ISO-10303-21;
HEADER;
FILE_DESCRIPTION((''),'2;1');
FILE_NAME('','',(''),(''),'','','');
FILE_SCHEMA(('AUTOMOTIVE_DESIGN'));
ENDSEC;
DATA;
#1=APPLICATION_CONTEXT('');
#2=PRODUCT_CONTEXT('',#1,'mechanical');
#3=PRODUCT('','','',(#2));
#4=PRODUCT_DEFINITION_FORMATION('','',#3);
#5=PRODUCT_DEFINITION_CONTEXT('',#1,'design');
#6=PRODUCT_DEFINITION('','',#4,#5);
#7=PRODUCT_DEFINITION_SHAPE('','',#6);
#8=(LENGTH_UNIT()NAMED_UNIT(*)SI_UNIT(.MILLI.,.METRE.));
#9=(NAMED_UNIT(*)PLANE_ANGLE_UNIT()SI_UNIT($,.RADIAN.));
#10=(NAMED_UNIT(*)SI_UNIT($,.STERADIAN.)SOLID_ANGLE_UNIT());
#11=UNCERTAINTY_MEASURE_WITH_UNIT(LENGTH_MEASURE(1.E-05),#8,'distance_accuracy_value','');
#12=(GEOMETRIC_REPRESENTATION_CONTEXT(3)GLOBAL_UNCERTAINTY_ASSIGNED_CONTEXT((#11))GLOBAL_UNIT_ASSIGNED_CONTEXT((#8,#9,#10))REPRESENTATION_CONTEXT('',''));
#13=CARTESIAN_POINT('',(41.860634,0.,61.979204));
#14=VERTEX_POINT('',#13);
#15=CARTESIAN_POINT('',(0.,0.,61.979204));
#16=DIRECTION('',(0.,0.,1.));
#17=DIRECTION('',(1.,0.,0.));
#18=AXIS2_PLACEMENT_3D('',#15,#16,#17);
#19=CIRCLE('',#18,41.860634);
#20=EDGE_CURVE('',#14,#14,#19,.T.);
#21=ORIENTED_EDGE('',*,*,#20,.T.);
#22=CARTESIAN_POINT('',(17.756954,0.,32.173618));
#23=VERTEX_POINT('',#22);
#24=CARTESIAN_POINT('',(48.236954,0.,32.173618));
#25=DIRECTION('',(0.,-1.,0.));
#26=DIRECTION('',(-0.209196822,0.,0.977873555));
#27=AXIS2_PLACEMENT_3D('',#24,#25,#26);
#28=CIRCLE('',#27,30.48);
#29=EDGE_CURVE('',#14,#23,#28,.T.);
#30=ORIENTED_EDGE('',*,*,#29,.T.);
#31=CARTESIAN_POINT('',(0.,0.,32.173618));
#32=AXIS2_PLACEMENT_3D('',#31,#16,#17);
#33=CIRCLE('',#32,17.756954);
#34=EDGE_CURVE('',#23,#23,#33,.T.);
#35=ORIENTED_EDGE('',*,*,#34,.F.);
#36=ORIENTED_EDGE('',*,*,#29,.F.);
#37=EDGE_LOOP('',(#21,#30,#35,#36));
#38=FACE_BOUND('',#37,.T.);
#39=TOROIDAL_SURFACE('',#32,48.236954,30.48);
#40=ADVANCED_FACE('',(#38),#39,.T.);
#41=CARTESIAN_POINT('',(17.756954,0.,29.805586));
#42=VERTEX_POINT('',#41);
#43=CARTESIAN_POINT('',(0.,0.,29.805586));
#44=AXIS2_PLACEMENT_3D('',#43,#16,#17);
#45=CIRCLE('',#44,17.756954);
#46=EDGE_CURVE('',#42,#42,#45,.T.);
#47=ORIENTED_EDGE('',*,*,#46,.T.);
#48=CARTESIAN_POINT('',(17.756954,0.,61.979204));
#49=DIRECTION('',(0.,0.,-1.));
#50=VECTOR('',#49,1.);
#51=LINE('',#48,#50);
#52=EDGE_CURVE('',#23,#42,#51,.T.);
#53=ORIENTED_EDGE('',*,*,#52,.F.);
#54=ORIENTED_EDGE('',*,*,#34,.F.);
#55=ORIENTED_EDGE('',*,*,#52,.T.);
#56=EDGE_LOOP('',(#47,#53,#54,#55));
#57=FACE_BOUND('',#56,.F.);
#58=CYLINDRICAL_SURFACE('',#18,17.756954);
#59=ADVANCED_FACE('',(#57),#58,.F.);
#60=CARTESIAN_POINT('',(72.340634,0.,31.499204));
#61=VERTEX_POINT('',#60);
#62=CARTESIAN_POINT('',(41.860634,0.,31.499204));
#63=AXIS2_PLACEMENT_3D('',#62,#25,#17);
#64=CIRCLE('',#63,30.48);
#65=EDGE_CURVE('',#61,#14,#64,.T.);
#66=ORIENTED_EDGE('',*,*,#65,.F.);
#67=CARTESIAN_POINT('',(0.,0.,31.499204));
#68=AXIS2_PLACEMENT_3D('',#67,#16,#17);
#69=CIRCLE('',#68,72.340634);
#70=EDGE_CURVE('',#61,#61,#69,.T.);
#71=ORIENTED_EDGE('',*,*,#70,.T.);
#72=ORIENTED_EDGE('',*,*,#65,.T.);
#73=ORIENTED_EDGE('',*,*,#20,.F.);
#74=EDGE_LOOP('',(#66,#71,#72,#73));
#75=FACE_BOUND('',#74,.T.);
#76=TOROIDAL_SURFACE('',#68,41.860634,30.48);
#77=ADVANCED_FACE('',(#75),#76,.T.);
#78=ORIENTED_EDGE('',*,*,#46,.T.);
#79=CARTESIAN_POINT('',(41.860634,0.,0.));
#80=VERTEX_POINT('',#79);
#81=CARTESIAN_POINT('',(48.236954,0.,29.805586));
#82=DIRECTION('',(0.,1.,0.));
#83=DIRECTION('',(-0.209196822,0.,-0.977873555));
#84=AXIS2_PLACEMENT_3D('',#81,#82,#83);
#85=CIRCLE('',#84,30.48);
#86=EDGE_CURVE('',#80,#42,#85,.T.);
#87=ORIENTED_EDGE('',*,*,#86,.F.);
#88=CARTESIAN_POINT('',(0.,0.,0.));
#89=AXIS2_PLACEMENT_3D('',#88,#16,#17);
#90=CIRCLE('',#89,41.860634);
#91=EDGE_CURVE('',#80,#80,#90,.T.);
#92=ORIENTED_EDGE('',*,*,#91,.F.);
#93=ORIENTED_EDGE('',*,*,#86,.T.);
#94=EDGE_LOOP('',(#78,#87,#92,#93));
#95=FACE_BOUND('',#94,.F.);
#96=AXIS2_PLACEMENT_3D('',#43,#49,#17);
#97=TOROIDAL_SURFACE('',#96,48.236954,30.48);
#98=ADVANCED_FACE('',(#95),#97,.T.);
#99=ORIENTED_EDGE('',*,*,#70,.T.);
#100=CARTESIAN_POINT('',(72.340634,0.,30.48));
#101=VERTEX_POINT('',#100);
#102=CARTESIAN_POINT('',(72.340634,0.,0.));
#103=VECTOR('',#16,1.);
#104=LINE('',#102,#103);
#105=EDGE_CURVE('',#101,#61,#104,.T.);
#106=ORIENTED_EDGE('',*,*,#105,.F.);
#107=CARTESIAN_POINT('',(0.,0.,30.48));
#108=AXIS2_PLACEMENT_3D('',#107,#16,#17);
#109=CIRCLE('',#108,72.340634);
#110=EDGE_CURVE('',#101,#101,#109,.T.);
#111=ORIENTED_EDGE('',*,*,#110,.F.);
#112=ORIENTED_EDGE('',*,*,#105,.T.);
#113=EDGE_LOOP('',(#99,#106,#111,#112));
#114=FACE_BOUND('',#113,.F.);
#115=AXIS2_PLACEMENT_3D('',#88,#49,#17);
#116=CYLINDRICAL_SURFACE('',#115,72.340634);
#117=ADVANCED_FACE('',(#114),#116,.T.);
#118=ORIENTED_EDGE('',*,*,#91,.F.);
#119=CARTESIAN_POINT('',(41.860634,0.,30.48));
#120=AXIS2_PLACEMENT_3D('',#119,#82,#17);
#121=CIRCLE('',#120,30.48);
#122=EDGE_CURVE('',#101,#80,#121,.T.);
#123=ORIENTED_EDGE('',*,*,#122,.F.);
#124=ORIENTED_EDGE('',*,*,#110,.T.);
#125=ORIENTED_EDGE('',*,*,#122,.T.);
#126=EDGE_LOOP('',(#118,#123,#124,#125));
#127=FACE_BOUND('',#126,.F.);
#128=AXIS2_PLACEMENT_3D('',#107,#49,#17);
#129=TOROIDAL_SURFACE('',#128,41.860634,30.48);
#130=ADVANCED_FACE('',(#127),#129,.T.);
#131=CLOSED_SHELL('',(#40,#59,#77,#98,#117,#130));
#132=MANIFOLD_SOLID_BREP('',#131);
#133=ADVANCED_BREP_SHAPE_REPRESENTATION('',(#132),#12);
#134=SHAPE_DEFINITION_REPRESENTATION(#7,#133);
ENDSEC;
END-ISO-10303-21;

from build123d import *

# Parameters (mm, degrees)
F0_R     = 72.3406344385
F1_DEPTH = 61.9792044163
F2_R     = 17.7569535603
F3_DEPTH = 66.9353306293
F4_R     = 30.48


# Not quite as in the source:
# - a fillet or chamfer that OpenCascade refuses, or shapes differently, is made with other operations: its cross-section is extruded or revolved along the edge and cut away or added


with BuildPart() as f1:
    # F0 (on Top) → F1 (new body)
    with BuildSketch(Plane.XY):
        Circle(F0_R)
    extrude(amount=F1_DEPTH)

    # F2 (on face) → F3 (cut)
    with BuildSketch(Plane.XY.offset(61.9792044163)):
        Circle(F2_R)
    extrude(amount=-F3_DEPTH, mode=Mode.SUBTRACT)

    # F4
    f4_edges = [f1.edges().sort_by_distance(p)[0] for p in [
        (-72.340634, 0, 61.979204),
        (72.340634, 0, 30.989602),
        (-72.340634, 0, 0),
    ]]
    fillet(f4_edges, radius=F4_R)

    # F5: fillet of radius 30.48 on 3 edges, made by hand

    # F5_s1 → F5_t2 (revolve, cut)
    with BuildSketch(Plane.XZ):
        with BuildLine():
            ThreePointArc((41.8606344385, 61.9792044163), (24.5369471591, 51.3397369094), (17.7569535603, 32.1736184556))
            Line((17.7569535603, 32.1736184556), (17.7569535603, 61.9792044163))
            Line((17.7569535603, 61.9792044163), (41.8606344385, 61.9792044163))
        make_face()
    revolve(axis=Axis((0, 0, 61.9792044163), (0, 0, 1)), mode=Mode.SUBTRACT)

    # F5_s3 → F5_t4 (revolve, cut)
    with BuildSketch(Plane.XZ):
        with BuildLine():
            ThreePointArc((41.8606344385, 0), (24.5369471591, 10.6394675069), (17.7569535603, 29.8055859606))
            Line((17.7569535603, 29.8055859606), (17.7569535603, 0))
            Line((17.7569535603, 0), (41.8606344385, 0))
        make_face()
    revolve(axis=Axis((0, 0, 0), (0, 0, 1)), mode=Mode.SUBTRACT)


solid = f1.part
